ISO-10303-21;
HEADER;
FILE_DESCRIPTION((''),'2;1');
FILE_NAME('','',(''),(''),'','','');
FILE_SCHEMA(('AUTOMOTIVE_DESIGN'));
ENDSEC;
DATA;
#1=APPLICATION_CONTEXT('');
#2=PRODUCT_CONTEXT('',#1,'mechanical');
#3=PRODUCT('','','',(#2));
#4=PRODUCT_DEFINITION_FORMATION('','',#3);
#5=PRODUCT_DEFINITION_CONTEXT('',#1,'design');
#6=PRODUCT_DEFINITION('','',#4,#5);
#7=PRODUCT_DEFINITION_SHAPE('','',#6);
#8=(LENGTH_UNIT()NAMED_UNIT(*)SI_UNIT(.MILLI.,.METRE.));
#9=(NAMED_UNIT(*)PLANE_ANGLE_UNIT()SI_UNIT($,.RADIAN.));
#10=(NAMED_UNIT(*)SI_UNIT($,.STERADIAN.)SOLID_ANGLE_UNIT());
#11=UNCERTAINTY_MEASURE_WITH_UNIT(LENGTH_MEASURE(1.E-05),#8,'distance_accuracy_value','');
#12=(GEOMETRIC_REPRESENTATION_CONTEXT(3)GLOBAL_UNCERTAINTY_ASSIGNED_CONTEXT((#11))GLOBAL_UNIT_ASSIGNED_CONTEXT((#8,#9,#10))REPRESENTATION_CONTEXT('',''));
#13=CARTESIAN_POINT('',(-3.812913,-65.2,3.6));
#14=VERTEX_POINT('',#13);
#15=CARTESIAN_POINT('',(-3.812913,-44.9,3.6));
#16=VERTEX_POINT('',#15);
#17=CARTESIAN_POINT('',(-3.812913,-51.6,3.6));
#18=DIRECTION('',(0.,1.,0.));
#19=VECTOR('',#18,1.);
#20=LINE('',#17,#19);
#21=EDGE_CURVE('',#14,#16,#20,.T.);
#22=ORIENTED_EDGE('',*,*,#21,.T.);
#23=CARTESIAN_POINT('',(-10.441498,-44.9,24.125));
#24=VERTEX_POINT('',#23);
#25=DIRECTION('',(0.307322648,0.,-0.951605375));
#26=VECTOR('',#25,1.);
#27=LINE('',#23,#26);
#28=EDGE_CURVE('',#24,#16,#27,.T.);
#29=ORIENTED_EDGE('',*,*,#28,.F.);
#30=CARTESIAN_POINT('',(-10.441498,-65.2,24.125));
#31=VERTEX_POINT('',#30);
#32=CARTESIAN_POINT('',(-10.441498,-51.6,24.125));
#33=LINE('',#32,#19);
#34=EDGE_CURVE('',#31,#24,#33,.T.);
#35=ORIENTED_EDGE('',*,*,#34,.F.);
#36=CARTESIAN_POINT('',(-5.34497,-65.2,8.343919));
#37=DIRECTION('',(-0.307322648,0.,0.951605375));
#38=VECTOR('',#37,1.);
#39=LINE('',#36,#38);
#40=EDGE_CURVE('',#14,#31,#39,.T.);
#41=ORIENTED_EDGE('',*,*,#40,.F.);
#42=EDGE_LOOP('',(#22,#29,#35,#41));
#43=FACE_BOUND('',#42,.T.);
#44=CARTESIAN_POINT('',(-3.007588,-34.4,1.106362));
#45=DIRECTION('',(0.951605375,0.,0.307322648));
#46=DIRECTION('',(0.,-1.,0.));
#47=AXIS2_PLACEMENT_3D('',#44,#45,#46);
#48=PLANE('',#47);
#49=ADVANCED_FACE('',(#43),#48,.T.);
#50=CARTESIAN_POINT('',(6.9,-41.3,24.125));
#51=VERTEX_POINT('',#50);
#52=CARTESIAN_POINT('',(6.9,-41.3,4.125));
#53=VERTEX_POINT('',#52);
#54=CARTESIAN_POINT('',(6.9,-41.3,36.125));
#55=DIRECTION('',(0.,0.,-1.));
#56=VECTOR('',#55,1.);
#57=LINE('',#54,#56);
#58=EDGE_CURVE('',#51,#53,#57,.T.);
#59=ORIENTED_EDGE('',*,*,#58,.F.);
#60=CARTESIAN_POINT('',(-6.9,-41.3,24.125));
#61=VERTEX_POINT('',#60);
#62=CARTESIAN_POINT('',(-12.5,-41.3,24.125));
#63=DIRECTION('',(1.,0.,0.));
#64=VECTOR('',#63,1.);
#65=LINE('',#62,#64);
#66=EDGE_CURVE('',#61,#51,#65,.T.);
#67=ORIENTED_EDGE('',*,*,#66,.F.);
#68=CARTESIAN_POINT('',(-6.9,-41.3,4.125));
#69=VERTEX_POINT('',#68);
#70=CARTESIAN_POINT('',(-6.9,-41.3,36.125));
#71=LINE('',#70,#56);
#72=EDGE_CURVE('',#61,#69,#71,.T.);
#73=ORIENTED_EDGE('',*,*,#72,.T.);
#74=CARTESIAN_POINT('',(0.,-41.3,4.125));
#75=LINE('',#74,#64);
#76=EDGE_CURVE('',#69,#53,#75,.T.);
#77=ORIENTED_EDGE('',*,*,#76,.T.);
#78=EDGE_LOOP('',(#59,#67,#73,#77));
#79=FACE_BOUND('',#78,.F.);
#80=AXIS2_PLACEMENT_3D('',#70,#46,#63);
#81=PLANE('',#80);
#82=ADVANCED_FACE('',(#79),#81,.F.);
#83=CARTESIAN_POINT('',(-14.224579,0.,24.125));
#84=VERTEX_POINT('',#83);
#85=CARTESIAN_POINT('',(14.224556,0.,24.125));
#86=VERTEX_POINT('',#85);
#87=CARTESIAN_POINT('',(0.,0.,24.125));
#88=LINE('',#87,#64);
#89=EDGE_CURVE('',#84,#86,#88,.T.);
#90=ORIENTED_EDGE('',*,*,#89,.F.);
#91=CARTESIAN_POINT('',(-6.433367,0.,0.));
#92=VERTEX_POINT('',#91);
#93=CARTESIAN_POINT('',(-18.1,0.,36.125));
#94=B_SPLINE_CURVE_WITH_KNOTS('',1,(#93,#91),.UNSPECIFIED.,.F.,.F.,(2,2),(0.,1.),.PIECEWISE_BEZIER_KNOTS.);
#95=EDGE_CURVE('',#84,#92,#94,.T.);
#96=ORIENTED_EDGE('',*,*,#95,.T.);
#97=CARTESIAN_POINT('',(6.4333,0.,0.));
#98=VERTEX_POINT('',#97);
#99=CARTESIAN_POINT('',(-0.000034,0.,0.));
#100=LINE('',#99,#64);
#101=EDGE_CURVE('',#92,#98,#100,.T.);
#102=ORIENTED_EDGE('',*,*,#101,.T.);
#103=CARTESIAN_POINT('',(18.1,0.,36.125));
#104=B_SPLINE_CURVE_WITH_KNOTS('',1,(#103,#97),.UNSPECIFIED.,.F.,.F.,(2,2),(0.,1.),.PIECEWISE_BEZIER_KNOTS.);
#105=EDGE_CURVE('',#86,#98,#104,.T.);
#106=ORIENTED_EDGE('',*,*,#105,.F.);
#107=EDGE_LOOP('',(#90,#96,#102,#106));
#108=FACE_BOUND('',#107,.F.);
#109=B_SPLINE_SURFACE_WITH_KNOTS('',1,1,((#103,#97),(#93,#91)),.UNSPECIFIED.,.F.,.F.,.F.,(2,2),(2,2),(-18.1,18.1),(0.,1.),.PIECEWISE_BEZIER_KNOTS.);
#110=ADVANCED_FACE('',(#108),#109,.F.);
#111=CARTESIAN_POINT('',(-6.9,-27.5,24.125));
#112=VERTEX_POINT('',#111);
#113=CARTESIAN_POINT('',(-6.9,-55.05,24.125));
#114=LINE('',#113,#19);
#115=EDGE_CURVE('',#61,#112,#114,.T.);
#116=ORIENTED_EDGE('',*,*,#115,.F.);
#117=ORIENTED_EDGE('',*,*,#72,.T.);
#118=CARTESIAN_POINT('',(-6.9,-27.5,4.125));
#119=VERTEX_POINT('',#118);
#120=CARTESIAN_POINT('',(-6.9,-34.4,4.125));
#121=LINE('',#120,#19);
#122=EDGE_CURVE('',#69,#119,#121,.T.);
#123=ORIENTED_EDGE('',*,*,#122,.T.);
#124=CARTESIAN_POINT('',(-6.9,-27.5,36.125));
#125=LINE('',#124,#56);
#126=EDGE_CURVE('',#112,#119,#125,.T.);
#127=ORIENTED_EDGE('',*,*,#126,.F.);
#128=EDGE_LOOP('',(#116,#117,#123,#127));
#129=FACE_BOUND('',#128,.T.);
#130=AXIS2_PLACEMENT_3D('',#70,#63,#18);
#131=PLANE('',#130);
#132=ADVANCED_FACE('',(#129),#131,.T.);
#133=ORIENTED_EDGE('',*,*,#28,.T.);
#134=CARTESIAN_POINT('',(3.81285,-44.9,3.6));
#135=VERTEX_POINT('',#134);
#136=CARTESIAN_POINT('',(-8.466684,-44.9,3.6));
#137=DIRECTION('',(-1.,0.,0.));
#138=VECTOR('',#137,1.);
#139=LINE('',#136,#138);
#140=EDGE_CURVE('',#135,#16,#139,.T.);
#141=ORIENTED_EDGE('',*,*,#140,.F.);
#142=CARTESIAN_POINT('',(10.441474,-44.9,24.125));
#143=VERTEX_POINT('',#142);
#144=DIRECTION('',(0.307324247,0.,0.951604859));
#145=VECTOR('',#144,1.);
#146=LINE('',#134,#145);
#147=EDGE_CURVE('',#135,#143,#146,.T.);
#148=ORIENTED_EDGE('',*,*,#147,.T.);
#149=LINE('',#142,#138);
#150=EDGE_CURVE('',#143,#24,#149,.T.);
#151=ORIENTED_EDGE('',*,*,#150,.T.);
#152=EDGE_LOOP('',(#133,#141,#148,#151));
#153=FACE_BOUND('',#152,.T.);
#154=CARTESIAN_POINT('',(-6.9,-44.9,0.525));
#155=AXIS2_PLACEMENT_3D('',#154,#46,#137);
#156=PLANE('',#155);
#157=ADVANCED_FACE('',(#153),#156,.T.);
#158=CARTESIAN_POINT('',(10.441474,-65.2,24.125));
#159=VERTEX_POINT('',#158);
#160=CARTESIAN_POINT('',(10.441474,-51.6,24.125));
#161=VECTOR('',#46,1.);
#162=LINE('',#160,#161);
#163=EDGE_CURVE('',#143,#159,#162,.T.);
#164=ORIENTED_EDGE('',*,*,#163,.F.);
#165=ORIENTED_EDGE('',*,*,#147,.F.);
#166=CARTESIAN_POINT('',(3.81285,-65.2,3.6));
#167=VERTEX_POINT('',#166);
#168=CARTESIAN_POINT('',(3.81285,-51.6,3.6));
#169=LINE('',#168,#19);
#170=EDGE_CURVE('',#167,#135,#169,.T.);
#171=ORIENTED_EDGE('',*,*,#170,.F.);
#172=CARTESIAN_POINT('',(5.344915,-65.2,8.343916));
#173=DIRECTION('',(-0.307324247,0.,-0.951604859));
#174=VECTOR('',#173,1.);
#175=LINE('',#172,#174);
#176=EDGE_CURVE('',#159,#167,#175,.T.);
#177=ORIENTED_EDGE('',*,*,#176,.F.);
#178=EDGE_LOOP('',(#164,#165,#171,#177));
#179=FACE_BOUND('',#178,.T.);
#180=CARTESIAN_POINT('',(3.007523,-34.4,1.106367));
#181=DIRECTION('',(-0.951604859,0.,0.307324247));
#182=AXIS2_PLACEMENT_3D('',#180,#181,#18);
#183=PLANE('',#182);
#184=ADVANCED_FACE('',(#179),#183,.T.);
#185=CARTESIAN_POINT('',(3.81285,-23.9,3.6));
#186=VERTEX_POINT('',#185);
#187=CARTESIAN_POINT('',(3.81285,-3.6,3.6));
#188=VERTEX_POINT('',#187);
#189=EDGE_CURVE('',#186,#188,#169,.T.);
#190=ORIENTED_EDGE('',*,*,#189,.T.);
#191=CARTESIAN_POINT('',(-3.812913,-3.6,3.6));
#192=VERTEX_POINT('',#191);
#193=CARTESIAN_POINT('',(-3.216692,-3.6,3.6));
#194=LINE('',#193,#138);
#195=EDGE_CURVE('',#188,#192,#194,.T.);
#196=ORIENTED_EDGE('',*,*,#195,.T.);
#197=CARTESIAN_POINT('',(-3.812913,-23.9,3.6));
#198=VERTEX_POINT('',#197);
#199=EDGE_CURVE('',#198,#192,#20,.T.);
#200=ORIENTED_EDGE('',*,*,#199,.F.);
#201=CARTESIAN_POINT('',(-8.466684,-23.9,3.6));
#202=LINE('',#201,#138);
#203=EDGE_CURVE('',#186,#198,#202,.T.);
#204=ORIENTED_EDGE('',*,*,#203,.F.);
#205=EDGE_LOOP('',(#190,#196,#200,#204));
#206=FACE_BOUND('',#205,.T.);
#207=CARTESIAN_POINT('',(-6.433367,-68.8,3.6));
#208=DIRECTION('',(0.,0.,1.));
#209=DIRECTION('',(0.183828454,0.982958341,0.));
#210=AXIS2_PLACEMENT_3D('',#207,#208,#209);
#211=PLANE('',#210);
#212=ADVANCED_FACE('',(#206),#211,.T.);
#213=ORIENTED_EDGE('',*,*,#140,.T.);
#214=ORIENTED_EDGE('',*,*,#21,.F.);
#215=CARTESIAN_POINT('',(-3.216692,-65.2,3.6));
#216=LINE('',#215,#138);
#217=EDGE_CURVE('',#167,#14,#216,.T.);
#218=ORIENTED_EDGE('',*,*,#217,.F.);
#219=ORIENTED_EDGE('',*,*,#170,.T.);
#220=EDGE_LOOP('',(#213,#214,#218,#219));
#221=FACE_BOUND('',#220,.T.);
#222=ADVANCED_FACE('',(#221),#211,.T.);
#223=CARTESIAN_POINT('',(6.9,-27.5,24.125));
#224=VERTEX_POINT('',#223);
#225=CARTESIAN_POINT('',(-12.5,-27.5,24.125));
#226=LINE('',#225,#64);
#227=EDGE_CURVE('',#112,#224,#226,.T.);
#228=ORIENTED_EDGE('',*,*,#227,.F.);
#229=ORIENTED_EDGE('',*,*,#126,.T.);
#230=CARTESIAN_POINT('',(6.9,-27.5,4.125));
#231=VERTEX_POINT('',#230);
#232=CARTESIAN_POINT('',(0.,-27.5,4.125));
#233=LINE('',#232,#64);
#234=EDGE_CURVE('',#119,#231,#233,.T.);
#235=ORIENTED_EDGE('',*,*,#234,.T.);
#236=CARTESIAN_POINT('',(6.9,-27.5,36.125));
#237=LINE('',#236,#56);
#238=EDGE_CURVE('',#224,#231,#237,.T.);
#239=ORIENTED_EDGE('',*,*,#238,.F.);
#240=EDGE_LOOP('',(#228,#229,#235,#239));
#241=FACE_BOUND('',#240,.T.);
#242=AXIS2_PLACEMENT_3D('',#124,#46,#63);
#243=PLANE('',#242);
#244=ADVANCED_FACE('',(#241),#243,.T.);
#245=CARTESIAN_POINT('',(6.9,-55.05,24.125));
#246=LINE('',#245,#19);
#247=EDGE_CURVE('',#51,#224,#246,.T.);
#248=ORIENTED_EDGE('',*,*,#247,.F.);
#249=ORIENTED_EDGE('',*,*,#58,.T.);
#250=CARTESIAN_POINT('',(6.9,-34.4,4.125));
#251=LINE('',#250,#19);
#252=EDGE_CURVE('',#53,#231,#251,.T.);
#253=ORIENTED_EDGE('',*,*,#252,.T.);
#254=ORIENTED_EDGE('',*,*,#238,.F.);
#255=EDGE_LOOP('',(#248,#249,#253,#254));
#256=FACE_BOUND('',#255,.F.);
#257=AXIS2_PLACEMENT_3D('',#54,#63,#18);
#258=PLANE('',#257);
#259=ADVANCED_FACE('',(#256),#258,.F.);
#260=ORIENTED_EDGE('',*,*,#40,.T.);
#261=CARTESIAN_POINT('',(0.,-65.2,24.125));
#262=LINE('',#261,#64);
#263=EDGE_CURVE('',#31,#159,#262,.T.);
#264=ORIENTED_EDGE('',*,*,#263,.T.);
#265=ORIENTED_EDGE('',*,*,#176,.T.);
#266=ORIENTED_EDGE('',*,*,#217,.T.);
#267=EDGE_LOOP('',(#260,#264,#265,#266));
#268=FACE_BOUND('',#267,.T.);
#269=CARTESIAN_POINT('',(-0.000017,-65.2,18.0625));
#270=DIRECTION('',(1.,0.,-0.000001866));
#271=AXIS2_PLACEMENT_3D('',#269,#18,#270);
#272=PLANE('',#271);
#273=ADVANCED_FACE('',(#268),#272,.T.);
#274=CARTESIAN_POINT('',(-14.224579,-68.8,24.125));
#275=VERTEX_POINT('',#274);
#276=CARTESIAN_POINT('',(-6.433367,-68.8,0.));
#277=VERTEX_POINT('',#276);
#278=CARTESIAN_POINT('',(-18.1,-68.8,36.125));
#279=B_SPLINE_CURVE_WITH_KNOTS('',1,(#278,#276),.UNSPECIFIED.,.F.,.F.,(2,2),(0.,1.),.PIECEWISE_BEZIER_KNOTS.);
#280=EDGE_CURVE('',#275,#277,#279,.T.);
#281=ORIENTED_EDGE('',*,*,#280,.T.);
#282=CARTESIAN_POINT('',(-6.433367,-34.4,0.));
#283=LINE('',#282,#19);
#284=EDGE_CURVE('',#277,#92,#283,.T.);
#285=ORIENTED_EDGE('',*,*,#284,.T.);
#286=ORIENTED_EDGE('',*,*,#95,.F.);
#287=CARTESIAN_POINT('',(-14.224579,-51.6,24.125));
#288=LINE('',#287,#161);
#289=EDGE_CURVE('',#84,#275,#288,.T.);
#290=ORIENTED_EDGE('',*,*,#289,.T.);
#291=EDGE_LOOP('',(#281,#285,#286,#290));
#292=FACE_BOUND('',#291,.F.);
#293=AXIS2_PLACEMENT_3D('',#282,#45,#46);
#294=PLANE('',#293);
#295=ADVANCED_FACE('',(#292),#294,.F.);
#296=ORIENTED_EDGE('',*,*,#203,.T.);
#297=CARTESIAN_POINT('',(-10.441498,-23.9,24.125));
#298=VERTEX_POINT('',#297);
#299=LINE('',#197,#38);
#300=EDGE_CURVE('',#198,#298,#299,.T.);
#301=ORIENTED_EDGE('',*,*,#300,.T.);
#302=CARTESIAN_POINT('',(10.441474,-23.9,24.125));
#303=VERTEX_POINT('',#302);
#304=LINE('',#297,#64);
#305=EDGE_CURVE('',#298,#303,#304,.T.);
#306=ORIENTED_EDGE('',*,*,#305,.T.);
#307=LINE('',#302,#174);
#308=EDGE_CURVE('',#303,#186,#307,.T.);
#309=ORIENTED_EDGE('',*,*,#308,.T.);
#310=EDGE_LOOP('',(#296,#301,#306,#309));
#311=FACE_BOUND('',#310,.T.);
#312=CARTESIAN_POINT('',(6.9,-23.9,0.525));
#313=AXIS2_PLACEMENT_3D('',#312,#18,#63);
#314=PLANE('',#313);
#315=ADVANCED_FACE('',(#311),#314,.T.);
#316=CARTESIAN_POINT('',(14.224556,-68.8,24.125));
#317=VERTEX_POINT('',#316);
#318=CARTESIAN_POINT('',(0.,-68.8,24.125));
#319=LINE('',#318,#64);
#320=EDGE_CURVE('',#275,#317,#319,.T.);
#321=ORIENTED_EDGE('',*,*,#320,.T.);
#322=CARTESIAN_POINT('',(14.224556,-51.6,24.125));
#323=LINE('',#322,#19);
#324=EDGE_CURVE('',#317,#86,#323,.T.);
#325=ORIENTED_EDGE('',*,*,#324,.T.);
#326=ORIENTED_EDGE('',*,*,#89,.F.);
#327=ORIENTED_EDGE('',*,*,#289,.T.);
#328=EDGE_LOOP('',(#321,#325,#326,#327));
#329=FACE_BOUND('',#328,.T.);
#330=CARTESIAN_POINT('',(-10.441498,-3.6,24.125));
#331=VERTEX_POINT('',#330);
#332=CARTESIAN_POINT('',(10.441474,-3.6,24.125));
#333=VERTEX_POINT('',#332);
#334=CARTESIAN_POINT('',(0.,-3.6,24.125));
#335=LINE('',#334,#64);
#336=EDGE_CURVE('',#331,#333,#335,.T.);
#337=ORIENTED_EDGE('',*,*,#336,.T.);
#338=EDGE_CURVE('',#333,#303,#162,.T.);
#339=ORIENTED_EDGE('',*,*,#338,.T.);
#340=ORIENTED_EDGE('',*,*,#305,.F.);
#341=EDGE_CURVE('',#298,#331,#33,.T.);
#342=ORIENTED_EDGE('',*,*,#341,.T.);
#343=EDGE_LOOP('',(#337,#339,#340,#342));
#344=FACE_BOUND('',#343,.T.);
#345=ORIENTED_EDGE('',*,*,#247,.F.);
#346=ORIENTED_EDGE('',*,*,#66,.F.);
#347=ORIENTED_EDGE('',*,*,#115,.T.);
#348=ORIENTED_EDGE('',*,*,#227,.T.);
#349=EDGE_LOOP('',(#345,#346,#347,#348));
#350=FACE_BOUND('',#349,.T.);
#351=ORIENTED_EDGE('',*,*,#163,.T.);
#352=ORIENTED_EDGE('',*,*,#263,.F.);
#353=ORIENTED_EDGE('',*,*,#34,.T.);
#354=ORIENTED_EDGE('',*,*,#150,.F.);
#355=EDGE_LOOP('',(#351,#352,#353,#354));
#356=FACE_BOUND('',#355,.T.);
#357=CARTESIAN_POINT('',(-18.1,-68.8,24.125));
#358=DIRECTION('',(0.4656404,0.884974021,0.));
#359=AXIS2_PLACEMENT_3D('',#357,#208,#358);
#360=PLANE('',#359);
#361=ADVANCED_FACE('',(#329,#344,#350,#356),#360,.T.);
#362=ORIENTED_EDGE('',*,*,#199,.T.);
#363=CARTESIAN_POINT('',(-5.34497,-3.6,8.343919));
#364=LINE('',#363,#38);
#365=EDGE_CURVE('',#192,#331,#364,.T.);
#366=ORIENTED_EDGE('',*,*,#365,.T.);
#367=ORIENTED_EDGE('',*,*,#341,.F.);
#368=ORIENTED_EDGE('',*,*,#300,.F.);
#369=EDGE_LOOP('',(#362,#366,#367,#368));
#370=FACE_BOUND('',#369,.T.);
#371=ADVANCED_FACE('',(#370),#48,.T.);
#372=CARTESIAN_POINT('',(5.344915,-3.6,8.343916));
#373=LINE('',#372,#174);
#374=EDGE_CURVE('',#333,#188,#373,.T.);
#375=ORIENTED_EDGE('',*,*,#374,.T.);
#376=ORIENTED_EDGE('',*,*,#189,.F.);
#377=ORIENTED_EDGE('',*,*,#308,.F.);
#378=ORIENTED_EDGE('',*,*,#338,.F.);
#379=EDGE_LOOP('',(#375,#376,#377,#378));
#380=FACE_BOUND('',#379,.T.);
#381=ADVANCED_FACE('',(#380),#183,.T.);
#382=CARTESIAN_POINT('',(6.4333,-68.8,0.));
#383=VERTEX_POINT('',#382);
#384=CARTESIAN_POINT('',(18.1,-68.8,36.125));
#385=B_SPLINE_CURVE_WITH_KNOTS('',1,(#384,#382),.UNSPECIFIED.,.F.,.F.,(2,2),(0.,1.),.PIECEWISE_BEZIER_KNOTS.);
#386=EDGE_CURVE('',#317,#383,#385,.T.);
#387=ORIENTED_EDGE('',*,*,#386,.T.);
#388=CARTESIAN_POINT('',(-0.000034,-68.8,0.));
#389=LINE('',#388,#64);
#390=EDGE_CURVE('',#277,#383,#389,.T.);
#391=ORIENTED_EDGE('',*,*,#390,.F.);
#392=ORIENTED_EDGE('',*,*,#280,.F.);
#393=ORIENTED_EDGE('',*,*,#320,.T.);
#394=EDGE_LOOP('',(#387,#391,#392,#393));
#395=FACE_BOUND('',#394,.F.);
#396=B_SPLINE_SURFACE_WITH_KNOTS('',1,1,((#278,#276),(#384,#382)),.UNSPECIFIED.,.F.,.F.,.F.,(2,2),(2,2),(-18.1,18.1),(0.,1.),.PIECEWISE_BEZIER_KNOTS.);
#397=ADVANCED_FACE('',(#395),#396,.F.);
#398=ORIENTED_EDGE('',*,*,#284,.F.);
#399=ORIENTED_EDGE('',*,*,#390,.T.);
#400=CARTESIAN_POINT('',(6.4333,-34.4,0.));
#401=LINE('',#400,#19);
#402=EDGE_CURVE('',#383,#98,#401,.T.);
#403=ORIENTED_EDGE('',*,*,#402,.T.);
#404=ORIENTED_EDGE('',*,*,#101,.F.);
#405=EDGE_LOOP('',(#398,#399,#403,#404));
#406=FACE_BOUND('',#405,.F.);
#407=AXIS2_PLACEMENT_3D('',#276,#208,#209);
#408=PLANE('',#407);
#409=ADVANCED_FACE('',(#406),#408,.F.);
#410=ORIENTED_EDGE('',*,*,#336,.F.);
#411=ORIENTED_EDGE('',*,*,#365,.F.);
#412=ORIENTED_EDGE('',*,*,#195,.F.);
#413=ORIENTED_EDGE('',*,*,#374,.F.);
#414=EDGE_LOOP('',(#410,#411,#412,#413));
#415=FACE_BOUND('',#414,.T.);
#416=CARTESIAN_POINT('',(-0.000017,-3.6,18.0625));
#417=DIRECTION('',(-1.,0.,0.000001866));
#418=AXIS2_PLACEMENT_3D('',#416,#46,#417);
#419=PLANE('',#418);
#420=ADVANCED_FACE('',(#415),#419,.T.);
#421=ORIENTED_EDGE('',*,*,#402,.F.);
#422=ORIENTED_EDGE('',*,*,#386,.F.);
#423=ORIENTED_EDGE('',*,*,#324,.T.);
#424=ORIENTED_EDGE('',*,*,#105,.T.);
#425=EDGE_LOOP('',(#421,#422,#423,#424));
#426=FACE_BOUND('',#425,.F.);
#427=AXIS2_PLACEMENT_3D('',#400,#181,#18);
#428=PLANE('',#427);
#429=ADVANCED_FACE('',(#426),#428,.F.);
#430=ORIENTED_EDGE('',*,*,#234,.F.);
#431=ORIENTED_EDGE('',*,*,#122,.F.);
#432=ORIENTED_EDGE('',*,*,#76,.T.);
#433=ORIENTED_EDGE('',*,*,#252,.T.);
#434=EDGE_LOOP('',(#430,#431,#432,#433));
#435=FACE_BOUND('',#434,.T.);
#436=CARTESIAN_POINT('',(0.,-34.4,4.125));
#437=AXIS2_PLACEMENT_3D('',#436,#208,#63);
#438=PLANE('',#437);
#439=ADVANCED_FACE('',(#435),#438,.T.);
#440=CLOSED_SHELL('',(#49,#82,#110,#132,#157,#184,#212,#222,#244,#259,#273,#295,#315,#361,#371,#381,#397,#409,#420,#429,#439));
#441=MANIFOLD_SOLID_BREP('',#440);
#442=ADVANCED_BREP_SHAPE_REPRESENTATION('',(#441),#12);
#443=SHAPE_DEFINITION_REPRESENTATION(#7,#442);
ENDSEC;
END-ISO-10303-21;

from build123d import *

# Parameters (mm, degrees)
F1_W        = 36.2
F1_H        = 68.8
F2_W        = 12.866667
F2_H        = 68.8
F4_DEPTH    = 12
F5_W        = 13.8
F5_H        = 13.8
F6_DEPTH    = 32
F7_T        = 3.6
F7_T3_DEPTH = 27.2
F7_T5_DEPTH = 21
F7_T7_DEPTH = 21


# Not quite as in the source:
# - a shell that OpenCascade refuses in one call is made with other operations: the cavity is built on its own and cut out


with BuildPart() as f3:
    # F1 (on offset) → F3 section 0
    with BuildSketch(Plane.XY.offset(36.125)):
        with Locations((0, -34.4)):
            Rectangle(F1_W, F1_H)
    # F2 (on Top) → F3 section 1
    with BuildSketch(Plane.XY):
        with Locations((-3.35e-05, -34.4)):
            Rectangle(F2_W, F2_H)
    loft()

    # F4 (cut): a face of the model
    f4_faces = [f3.faces().sort_by_distance(p)[0] for p in [
        (0, -34.4, 36.125),
    ]]
    extrude(f4_faces, amount=-F4_DEPTH, mode=Mode.SUBTRACT)

    # F5 (on offset) → F6 (cut)
    with BuildSketch(Plane.XY.offset(36.125)):
        with Locations((0, -34.4)):
            Rectangle(F5_W, F5_H)
    extrude(amount=-F6_DEPTH, mode=Mode.SUBTRACT)

    # F7: shell of thickness 3.6, made by hand


with BuildPart() as f7_core1:
    # F7_t2: copy of F3
    add(f3.part)

    # the walls: a layer under each face that stays
    f7_faces = [f7_core1.faces().sort_by_distance(p)[0] for p in [
        (-2.2314e-05, 0, 12.0625),
        (10.3289282007, -34.4, 12.0625),
        (-3.35e-05, -34.4, 0),
        (-10.3289728287, -34.4, 12.0625),
        (-2.2314e-05, -68.8, 12.0625),
        (0, -27.5, 14.125),
        (6.9, -34.4, 14.125),
        (0, -41.3, 14.125),
        (-6.9, -34.4, 14.125),
        (0, -34.4, 4.125),
    ]]
    thicken(f7_faces, amount=-F7_T, mode=Mode.SUBTRACT)

    # F7_s4 → F7_t3 (cut)
    with BuildSketch(Plane.XY.offset(0.525)):
        Polygon((-6.864, -27.536), (-6.9, -23.9), (-10.5, -23.9), (-10.5, -27.5), align=None)
        Polygon((6.864, -27.536), (6.9, -23.9), (10.5, -23.9), (10.5, -27.5), align=None)
        Polygon((6.864, -41.264), (10.5, -41.3), (10.5, -44.9), (6.9, -44.9), align=None)
        Polygon((-6.864, -41.264), (-6.9, -44.9), (-10.5, -44.9), (-10.5, -41.3), align=None)
    extrude(amount=F7_T3_DEPTH, mode=Mode.SUBTRACT)

    # F7_s6 → F7_t5 (cut)
    with BuildSketch(Plane.YZ.offset(-10.5)):
        Polygon((-27.536, 4.161), (-23.9, 4.125), (-23.9, 0.525), (-27.5, 0.525), align=None)
        Polygon((-41.264, 4.161), (-44.9, 4.125), (-44.9, 0.525), (-41.3, 0.525), align=None)
    extrude(amount=F7_T5_DEPTH, mode=Mode.SUBTRACT)

    # F7_s8 → F7_t7 (cut)
    with BuildSketch(Plane.XZ.offset(23.9)):
        Polygon((6.864, 4.161), (10.5, 4.125), (10.5, 0.525), (6.9, 0.525), align=None)
        Polygon((-6.864, 4.161), (-10.5, 4.125), (-10.5, 0.525), (-6.9, 0.525), align=None)
    extrude(amount=F7_T7_DEPTH, mode=Mode.SUBTRACT)


with BuildPart() as f3_1:
    add(f3.part)

    # what is left inside the walls is the cavity
    f7_cavity = [f7_core1.part.solids().sort_by_distance(p)[0] for p in [
        (8.197675, -13.75, 17.294397),
        (8.197675, -55.05, 17.294397),
    ]]
    add(f7_cavity, mode=Mode.SUBTRACT)


solid = f3_1.part
